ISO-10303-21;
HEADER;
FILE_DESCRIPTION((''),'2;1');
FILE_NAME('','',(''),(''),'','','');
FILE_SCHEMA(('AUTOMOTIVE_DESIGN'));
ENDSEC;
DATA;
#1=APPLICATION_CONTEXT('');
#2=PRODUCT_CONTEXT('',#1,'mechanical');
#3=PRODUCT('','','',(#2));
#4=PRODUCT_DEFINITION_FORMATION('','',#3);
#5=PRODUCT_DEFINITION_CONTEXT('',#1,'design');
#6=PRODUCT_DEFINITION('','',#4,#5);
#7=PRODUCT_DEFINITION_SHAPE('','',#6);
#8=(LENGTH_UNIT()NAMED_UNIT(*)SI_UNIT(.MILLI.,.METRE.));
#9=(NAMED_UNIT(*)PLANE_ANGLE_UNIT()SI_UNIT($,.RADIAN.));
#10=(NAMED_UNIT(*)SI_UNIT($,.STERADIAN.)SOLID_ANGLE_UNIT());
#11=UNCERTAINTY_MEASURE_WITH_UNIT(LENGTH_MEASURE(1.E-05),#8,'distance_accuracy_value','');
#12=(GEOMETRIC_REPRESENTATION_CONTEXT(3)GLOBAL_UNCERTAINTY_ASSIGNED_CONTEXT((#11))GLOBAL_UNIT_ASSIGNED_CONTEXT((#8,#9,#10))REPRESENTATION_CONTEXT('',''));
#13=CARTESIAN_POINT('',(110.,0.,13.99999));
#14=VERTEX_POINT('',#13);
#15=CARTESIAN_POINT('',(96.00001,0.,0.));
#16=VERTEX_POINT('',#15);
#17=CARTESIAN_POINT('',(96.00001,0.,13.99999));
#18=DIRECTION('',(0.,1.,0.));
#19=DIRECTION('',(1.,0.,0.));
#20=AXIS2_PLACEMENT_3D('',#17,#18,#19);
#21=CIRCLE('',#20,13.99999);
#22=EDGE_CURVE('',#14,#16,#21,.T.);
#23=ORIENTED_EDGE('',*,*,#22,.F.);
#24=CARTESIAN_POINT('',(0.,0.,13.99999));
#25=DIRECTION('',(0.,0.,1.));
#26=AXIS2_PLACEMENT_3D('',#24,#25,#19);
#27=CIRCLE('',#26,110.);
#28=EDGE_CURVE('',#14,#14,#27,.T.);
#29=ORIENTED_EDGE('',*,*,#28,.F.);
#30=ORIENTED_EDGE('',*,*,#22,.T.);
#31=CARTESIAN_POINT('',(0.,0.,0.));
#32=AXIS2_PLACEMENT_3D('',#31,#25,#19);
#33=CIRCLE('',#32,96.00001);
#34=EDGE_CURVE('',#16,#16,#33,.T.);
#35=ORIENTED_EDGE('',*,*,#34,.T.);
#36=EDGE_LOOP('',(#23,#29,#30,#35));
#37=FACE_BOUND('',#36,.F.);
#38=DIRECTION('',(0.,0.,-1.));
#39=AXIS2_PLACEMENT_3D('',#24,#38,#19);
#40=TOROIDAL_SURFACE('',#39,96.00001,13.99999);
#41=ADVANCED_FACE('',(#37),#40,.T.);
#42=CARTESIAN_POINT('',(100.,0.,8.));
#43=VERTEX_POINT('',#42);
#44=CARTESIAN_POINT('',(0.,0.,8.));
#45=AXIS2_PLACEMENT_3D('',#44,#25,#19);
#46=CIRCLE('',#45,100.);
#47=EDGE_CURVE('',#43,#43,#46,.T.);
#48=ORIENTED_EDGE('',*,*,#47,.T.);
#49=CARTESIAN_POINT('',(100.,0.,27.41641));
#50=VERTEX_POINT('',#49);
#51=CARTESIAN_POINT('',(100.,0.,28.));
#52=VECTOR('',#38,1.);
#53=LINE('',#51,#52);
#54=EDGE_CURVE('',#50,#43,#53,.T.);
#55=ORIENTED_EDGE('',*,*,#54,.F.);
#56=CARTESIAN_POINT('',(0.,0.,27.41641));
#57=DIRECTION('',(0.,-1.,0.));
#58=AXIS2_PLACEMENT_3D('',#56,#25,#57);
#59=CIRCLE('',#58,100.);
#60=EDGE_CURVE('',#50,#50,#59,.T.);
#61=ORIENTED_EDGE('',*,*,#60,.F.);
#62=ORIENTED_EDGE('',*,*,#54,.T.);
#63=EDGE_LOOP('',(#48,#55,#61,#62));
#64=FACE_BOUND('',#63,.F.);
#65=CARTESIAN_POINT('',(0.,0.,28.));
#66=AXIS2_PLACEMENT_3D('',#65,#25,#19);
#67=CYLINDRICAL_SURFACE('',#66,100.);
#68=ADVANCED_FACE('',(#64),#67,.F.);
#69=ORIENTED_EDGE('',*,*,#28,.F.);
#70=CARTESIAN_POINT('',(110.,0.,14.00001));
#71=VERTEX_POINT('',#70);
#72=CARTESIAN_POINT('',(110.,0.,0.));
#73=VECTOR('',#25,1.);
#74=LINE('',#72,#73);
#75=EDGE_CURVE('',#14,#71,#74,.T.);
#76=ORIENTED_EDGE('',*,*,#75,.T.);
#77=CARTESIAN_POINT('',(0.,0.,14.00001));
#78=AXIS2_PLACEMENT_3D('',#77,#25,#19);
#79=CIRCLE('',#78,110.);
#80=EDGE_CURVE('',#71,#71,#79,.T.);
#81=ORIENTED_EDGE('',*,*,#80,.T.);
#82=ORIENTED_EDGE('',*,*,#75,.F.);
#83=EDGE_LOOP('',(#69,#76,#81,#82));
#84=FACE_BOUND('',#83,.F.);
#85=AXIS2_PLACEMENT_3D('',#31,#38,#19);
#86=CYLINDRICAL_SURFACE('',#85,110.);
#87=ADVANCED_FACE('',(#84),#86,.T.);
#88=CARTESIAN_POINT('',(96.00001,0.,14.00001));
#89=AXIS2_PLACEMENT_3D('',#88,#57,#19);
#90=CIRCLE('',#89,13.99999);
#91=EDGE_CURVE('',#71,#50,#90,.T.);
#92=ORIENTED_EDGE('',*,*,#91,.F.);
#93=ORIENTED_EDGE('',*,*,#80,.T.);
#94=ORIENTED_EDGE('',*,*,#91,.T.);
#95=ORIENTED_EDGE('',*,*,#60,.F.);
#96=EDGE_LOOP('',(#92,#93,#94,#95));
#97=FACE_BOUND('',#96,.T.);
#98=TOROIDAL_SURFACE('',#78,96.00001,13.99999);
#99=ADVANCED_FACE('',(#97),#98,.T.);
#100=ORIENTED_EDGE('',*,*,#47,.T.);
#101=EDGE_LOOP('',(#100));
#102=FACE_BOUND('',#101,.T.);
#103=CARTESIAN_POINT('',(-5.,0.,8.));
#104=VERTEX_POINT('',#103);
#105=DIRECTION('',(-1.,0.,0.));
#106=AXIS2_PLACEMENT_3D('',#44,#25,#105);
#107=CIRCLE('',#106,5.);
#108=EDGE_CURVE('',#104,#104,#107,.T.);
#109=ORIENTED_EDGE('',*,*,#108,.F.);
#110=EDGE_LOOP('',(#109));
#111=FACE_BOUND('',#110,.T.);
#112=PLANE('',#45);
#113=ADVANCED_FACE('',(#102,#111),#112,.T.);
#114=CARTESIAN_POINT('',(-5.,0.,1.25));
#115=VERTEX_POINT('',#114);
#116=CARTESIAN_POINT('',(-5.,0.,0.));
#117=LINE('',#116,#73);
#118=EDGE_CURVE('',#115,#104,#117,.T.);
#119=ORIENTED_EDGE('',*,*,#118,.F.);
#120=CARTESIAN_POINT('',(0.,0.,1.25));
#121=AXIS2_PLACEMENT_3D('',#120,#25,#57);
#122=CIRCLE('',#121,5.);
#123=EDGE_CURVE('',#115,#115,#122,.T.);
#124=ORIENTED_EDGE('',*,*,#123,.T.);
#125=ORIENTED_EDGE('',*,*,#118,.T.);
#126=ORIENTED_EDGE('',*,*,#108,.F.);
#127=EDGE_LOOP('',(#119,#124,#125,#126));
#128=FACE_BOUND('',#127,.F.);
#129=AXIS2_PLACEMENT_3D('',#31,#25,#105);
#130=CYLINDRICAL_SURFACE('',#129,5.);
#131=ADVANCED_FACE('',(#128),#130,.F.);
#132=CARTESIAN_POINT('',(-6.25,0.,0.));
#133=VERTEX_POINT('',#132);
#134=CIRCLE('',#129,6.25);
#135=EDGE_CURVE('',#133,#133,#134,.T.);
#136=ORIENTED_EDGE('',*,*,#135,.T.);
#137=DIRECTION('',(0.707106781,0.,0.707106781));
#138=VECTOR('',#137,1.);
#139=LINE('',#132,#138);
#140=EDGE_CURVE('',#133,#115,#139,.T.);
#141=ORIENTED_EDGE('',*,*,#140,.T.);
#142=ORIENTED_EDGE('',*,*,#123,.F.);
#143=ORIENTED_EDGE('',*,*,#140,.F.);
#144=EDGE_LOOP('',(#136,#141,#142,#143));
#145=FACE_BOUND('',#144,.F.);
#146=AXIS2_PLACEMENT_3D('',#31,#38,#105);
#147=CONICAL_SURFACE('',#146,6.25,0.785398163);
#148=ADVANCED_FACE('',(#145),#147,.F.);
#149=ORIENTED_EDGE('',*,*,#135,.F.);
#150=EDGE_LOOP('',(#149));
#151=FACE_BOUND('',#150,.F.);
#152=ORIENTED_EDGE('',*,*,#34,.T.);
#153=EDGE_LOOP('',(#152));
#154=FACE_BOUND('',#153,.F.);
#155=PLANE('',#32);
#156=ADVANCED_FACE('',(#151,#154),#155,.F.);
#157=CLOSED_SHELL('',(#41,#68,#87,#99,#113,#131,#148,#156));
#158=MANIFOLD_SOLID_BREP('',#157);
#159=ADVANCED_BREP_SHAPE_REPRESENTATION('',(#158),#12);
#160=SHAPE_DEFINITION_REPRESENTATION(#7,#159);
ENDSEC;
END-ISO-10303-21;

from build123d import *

# Parameters (mm, degrees)
F0_R           = 110
F1_DEPTH       = 28
F2_R           = 13.99999
F3_R           = 100
F4_DEPTH       = 20
F6_D           = 10
F6_CSINK_D     = 12.5
F6_CSINK_ANGLE = 90


# Not quite as in the source:
# - a fillet or chamfer is up to 0.001 mm smaller than in the source, because OpenCascade refuses the exact size


with BuildPart() as f1:
    # F0 (on Top) → F1 (new body)
    with BuildSketch(Plane.XY):
        Circle(F0_R)
    extrude(amount=F1_DEPTH)

    # F2 (radius 14 in the source; OpenCascade refuses exactly that, so slightly less here)
    f2_edges = [f1.edges().sort_by_distance(p)[0] for p in [
        (-110, 0, 28),
        (-110, 0, 0),
    ]]
    fillet(f2_edges, radius=F2_R)

    # F3 (on face) → F4 (cut)
    with BuildSketch(Plane.XY.offset(28)):
        Circle(F3_R)
    extrude(amount=-F4_DEPTH, mode=Mode.SUBTRACT)

    # F6 (through all)
    with Locations(Plane(origin=(0, 0, 0), x_dir=(1, 0, 0), z_dir=(0, 0, -1))):
        with Locations((0, 0)):
            CounterSinkHole(F6_D / 2, F6_CSINK_D / 2, counter_sink_angle=F6_CSINK_ANGLE)


solid = f1.part
